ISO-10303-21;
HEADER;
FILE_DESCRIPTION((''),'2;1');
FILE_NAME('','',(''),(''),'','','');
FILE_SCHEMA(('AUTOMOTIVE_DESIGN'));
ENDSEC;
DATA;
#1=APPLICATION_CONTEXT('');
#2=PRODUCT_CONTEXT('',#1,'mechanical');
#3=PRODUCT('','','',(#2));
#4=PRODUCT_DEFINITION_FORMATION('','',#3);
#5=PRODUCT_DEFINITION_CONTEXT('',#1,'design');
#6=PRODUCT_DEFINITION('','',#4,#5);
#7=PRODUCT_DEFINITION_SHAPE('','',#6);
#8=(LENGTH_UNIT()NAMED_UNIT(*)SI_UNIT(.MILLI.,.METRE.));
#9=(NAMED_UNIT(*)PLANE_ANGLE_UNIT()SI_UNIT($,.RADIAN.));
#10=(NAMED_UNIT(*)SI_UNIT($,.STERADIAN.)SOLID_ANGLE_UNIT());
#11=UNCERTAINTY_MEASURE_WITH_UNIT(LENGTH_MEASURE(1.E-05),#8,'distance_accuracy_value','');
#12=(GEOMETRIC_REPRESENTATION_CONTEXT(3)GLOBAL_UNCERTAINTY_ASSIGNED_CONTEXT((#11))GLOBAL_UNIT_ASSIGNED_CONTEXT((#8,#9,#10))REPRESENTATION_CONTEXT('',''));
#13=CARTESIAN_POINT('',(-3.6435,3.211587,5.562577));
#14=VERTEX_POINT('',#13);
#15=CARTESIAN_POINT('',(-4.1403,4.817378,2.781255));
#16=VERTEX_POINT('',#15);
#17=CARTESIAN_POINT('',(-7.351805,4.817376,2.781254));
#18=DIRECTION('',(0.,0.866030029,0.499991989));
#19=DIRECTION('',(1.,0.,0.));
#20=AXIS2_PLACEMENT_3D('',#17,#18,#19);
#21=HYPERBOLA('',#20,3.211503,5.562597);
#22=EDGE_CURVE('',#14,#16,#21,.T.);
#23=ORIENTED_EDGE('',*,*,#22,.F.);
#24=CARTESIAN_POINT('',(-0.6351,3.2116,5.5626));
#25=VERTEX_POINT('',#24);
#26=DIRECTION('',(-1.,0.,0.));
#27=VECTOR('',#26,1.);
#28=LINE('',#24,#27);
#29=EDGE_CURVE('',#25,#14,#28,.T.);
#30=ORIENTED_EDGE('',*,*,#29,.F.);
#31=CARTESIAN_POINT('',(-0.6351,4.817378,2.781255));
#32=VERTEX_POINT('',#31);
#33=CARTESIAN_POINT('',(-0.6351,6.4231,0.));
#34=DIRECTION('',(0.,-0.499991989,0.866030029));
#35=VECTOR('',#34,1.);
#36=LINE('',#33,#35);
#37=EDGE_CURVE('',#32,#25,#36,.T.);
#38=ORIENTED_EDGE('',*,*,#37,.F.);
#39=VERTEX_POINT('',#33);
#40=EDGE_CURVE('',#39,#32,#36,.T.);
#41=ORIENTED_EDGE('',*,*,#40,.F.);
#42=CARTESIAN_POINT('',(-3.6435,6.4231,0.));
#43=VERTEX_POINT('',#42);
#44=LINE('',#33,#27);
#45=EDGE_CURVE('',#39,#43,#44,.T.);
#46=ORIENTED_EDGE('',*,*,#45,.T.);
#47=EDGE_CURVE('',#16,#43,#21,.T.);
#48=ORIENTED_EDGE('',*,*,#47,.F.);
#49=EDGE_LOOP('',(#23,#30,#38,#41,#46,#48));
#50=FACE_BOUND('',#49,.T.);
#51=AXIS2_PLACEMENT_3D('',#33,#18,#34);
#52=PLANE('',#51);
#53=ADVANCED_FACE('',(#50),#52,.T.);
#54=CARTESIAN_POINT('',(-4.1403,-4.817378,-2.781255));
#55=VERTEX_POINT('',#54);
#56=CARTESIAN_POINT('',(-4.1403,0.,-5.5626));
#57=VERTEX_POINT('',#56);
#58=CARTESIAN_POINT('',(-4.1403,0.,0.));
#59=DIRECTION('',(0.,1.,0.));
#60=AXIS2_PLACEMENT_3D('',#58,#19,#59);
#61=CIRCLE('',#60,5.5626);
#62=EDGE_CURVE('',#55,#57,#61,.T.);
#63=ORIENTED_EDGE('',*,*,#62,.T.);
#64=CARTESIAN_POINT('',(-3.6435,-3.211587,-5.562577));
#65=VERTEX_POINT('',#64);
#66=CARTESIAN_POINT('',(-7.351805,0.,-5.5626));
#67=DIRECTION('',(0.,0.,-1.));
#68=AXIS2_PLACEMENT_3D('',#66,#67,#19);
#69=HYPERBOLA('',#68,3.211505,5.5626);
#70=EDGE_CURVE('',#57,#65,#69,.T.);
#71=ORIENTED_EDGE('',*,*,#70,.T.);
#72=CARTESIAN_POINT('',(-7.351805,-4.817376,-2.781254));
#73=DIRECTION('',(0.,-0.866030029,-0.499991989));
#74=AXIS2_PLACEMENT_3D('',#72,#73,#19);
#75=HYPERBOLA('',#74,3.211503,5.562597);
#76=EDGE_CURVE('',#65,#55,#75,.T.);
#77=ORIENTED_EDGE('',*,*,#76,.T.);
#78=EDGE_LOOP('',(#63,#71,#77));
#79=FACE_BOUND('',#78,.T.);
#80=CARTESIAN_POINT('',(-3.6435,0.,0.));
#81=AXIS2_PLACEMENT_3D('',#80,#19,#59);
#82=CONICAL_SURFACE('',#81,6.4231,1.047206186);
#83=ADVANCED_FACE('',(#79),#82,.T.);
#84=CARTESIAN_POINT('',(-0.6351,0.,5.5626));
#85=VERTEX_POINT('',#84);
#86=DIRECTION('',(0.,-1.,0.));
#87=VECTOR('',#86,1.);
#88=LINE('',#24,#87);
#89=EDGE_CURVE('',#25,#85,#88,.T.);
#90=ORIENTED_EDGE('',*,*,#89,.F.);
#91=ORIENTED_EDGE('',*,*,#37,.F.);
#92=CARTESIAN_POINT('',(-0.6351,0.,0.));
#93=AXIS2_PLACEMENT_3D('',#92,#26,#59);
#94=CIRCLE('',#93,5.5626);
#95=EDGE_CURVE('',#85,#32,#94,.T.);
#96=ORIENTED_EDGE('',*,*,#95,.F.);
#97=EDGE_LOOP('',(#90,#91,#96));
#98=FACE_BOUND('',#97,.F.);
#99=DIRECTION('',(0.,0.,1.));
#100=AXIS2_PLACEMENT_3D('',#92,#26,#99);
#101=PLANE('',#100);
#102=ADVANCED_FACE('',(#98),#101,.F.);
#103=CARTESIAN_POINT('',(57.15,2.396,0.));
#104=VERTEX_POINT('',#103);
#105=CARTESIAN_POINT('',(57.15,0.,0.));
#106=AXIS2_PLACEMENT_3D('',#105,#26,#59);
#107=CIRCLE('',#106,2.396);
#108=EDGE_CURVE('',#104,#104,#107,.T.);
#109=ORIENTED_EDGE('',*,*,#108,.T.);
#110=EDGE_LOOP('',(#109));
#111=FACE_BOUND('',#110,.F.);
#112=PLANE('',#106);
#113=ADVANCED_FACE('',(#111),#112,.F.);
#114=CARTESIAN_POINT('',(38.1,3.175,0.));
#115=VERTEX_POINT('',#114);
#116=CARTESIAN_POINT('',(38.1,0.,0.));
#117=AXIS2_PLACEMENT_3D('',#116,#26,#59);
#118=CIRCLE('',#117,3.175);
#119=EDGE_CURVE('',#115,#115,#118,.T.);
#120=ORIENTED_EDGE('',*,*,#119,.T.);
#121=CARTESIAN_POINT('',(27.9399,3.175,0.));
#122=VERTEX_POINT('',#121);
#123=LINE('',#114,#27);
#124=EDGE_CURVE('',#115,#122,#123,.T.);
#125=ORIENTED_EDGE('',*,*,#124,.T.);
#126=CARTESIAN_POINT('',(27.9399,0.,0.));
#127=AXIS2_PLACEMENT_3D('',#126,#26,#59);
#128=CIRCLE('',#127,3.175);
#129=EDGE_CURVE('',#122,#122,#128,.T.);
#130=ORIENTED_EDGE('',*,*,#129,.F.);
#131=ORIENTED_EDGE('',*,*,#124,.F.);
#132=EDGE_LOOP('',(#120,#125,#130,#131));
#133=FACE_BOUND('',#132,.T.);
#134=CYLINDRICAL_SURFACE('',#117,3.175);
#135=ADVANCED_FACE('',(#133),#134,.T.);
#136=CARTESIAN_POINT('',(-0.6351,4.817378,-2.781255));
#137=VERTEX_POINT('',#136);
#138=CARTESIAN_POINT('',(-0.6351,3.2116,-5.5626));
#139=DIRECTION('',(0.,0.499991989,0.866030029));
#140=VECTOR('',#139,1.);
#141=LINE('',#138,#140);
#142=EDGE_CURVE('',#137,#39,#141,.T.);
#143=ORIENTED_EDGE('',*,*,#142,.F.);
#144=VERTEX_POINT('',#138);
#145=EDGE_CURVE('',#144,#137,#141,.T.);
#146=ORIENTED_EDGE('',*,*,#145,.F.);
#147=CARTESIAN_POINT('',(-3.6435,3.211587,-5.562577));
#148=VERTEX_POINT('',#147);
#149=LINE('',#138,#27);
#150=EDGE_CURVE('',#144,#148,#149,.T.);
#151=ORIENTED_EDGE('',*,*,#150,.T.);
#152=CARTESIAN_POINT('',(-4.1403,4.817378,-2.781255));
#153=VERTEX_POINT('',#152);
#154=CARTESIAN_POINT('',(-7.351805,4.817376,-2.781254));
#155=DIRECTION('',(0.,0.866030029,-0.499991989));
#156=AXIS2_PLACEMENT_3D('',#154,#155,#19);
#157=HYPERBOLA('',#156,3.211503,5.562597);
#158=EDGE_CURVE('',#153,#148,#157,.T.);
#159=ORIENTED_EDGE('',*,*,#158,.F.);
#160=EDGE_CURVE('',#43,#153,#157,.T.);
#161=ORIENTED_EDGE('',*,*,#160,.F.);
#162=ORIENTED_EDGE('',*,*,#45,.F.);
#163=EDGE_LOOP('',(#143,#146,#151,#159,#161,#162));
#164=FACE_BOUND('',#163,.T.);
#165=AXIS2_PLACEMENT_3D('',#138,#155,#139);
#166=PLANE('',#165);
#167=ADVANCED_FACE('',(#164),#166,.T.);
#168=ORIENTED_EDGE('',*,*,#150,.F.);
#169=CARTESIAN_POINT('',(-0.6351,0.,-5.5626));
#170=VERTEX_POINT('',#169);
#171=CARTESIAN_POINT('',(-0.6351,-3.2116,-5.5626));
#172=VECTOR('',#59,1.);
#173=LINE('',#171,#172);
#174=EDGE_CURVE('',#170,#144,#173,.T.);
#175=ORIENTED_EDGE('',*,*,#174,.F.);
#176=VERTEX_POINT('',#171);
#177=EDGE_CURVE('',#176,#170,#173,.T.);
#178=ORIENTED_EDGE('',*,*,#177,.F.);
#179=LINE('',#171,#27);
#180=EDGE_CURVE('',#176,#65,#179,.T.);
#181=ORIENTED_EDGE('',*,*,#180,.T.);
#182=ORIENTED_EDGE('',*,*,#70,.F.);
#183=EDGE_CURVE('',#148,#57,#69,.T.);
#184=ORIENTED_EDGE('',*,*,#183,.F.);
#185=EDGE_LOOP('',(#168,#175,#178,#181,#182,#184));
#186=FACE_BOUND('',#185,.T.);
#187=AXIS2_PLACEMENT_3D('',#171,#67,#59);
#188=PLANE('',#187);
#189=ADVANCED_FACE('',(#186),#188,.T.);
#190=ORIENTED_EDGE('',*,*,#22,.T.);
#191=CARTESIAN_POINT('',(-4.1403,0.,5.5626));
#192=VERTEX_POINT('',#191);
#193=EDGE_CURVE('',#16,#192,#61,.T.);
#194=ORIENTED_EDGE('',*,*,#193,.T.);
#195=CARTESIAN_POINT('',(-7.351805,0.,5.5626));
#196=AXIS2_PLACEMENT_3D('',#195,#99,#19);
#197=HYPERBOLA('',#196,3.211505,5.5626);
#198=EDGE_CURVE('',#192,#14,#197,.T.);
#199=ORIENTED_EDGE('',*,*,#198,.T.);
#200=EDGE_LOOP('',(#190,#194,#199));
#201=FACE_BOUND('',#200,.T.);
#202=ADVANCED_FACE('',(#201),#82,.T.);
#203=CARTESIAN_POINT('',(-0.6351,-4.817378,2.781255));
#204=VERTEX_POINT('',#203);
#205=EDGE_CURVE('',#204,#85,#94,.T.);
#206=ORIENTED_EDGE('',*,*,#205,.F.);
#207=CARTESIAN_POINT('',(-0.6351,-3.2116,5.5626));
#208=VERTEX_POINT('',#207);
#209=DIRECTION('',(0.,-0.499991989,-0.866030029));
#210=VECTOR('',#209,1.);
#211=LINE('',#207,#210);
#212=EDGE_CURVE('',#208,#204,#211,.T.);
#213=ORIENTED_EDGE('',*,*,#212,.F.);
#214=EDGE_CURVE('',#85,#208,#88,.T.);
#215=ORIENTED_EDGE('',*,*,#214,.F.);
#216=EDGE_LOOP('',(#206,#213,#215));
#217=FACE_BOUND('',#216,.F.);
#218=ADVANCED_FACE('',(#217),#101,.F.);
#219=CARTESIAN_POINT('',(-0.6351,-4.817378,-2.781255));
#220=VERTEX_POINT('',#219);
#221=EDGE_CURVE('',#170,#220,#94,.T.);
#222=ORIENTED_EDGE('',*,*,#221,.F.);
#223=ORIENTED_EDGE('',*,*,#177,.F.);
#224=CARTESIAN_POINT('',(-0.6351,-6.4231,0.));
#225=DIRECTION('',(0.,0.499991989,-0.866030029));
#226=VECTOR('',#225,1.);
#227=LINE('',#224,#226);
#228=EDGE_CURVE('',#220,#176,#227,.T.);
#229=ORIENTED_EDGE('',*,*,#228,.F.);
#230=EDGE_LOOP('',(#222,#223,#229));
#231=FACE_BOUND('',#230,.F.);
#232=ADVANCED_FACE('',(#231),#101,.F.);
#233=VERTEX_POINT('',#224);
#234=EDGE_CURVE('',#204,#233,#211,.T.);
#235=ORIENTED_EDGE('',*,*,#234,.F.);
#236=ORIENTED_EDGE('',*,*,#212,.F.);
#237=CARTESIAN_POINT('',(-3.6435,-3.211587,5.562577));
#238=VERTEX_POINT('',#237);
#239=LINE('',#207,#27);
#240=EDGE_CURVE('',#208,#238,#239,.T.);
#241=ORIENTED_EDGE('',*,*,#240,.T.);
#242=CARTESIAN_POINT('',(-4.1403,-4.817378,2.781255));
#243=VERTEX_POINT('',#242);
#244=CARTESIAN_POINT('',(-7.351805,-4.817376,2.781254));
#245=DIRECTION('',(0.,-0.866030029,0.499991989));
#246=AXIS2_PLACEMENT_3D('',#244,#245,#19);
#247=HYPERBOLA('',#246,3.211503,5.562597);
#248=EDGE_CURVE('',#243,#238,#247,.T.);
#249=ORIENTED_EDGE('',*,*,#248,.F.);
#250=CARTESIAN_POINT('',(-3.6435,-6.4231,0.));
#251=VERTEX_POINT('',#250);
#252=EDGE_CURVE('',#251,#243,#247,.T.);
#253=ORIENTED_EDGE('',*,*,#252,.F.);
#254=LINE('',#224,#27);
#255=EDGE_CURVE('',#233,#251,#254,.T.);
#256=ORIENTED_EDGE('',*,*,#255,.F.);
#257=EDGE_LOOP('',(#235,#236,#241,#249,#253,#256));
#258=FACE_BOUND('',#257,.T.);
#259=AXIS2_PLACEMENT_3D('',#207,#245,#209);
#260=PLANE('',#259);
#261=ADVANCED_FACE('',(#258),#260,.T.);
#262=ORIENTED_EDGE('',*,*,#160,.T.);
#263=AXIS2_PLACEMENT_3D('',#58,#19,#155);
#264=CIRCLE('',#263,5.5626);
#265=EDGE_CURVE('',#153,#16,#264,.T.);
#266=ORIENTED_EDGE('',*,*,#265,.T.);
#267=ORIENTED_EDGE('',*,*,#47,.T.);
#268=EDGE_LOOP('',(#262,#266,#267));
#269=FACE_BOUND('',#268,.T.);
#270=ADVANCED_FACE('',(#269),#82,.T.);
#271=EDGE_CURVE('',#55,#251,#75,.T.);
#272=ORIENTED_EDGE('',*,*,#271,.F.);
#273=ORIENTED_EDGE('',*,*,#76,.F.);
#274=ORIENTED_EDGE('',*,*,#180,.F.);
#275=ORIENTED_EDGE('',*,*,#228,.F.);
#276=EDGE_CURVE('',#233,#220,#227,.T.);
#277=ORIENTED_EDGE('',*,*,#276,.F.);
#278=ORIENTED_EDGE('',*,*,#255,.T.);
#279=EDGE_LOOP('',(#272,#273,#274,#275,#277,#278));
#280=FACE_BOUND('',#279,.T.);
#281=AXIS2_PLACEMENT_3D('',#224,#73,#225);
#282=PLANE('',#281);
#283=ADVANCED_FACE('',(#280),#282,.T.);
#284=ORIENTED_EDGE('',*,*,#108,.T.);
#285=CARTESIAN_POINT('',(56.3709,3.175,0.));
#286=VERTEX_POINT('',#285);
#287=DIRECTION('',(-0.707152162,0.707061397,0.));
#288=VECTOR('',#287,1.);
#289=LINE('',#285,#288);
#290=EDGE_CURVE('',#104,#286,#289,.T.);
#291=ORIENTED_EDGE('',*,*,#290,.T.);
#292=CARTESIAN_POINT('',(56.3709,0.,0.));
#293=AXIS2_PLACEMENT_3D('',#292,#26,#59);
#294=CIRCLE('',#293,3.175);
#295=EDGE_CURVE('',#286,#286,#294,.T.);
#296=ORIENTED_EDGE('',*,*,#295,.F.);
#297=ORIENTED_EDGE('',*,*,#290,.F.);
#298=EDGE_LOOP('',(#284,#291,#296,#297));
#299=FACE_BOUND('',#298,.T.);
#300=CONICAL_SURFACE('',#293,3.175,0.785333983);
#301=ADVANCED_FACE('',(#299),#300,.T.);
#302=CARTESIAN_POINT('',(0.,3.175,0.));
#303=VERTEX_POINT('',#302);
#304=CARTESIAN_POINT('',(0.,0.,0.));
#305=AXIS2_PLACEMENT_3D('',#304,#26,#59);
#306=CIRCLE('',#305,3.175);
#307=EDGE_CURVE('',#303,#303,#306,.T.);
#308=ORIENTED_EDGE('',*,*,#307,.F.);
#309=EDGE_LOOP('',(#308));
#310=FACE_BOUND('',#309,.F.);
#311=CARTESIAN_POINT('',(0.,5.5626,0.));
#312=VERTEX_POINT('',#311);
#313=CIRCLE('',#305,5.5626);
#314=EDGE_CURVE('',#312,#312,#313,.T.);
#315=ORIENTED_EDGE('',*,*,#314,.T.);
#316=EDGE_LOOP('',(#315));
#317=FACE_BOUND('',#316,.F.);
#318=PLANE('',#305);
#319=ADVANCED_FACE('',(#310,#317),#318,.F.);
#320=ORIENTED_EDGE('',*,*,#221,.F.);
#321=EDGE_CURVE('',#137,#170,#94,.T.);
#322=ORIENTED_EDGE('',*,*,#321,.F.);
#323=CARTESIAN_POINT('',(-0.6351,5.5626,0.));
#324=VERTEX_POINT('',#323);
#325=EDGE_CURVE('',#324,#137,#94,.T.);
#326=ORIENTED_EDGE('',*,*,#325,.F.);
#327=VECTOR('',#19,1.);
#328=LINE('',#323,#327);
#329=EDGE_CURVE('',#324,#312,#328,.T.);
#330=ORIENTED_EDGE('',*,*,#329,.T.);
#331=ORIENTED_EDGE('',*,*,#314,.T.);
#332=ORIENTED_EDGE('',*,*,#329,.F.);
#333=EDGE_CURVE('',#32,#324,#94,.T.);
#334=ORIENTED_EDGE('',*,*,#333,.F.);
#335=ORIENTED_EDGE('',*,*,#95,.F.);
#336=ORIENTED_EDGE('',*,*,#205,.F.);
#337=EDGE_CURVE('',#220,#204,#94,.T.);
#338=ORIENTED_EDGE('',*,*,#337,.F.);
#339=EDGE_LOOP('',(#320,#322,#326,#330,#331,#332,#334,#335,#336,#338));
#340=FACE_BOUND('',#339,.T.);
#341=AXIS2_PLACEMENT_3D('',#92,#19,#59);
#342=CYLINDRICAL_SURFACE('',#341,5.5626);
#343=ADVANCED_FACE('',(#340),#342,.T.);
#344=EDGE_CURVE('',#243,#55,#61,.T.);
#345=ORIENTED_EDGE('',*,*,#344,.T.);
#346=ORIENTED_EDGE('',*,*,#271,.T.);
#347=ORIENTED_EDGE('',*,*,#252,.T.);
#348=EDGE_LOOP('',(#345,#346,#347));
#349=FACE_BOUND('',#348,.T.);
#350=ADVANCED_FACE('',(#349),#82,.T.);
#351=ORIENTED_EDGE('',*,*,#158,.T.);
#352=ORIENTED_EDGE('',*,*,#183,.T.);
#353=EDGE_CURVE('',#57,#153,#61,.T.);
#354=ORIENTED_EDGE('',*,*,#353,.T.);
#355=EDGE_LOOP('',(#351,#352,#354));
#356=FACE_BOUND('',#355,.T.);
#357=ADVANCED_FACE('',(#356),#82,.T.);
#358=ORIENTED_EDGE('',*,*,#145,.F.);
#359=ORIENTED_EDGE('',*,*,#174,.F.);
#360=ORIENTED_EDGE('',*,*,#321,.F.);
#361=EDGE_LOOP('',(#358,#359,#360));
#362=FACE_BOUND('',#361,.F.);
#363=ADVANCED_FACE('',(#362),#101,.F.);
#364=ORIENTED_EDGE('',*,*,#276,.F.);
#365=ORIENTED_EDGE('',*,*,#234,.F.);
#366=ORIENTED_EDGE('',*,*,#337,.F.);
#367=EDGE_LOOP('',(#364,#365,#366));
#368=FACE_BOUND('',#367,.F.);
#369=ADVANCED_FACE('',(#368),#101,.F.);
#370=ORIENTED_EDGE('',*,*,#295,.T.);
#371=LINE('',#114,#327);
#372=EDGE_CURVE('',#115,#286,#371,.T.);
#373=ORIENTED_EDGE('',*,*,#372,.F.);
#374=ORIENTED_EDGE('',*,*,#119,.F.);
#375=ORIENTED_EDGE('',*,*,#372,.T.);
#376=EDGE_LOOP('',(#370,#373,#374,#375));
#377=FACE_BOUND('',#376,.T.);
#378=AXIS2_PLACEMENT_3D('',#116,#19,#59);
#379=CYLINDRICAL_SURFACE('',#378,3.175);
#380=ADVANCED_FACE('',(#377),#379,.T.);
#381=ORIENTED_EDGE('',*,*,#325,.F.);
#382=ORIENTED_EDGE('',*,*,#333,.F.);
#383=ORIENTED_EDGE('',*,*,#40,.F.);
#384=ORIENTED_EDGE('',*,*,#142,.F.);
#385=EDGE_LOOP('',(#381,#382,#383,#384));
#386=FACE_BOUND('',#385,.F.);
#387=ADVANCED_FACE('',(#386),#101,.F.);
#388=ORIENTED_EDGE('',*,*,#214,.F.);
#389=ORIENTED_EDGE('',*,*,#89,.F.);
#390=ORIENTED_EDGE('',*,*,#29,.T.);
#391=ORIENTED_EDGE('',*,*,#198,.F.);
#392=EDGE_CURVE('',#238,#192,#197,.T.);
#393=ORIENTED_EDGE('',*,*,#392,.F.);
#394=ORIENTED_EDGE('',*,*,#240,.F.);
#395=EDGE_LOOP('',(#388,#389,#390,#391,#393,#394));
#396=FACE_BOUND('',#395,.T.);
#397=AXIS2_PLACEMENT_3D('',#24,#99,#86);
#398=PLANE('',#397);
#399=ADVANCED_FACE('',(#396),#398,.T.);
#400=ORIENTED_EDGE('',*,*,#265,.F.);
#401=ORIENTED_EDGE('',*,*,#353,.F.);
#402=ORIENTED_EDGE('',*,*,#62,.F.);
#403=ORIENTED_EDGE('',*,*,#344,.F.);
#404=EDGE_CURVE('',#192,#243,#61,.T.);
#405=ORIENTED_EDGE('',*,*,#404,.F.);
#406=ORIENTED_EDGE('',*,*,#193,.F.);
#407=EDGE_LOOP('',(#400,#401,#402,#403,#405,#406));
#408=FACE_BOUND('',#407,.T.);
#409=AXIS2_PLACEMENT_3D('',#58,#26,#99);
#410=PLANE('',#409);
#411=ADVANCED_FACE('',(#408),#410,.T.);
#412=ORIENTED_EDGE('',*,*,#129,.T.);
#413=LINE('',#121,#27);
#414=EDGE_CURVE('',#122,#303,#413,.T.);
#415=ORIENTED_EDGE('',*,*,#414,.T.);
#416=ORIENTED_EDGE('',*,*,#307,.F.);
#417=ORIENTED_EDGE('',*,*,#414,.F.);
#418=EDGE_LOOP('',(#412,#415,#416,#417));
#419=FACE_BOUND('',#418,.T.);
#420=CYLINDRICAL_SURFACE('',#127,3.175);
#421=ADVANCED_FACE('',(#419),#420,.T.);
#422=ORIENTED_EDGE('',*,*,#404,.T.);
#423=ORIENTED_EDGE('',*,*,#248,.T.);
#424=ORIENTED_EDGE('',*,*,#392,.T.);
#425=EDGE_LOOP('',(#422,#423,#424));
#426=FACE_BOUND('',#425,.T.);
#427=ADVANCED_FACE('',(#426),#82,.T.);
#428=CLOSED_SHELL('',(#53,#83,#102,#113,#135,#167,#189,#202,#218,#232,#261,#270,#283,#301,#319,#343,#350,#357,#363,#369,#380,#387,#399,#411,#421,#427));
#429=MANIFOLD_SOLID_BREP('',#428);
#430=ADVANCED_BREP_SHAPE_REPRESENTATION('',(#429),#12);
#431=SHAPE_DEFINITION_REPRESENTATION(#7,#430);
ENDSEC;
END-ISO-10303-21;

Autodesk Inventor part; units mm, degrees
ref_plane "YZ Plane" through (0, 0, 0) normal (1, 0, 0) x (0, 1, 0)
ref_plane "XZ Plane" through (0, 0, 0) normal (0, 1, 0) x (-1, 0, 0)
sketch "Sketch1" plane through (0, 0, 0) normal (0, 0, 1) x (1, 0, 0)
  line L0 (0, 5.5626) -> (0, 3.175)
  line L1 (38.1, 3.175) -> (57.15, 3.175)
  line L2 (57.15, 3.175) -> (57.15, 0)
  line L3 (57.15, 0) -> (-0.6351, 0)
  line L4 (-12.1921, 0) -> (68.707, 0) projected
  line L5 (-0.6351, 0) -> (-0.6351, 5.5626)
  line L6 (-0.6351, 5.5626) -> (0, 5.5626)
  line L7 (38.1, 3.175) -> (27.9399, 3.175)
  line L8 (27.9399, 3.175) -> (0, 3.175)
  line L9 (0, -1.1125) -> (0, 6.6751) projected
  dimension "d0" = 57.15
  dimension "d1" = 19.05
  dimension "d2" = 6.35
  dimension "d9" = 0.6351
  dimension "d10" = 11.1252
  dimension "d13" = 10.1601
  dimension "d14" = 6.35
revolve "Body" add sketch "Sketch1" angle 360 about axis through (57.15, 0, 0) along (-1, 0, 0)
sketch "Sketch2" plane through (-0.6351, 0, 0) normal (-1, 0, 0) x (0, 0, 1)
  line L0 (0, 6.4231) -> (5.5626, 3.2116)
  line L1 (5.5626, 3.2116) -> (5.5626, -3.2116)
  line L2 (5.5626, -3.2116) -> (0, -6.4231)
  line L3 (0, -6.4231) -> (-5.5626, -3.2116)
  line L4 (-5.5626, -3.2116) -> (-5.5626, 3.2116)
  line L5 (-5.5626, 3.2116) -> (0, 6.4231)
  point P0 (0, 0)
  point P1 (0, 0)
  dimension "d11" = 11.1252
extrude "Head" add sketch "Sketch2" along normal blind 3.5052
sketch "Sketch4" plane through (0, 0, 0) normal (0, 0, 1) x (1, 0, 0)
  line L0 (-4.1403, 5.5626) -> (-4.1403, 6.4231)
  line L1 (-4.1403, 6.4231) -> (-3.6435, 6.4231)
  line L2 (-3.6435, 6.4231) -> (-4.1403, 5.5626)
  line L3 (-4.8413, 0) -> (0.0659, 0) projected
  line L4 (-0.6351, 6.4231) -> (-4.1403, 6.4231) projected
  line L5 (-4.1403, 3.2116) -> (-4.1403, 6.4231) projected
  dimension "d5" = 30
  dimension "d19" = 11.1252
revolve "Chamfer1" cut sketch "Sketch4" angle 360 about axis through (-10, 0, 0) along (1, 0, 0)
thread "Thread" size "1/4-20 UNC" class "2A" standard "ANSI Unified Screw Threads" length 19.05
chamfer "Chamfer2" distance 0.779 distance2 0.7791 1 edges at (57.15, -3.175, 0) measured on face at (57.15, -0.5663, 1.1587)
ref_plane "Work Plane1" through (1.525, 0, 0) normal (0, 0, 1) x (1, 0, 0)
equation "\"d0\" = NLG"
equation "\"d1\" = GEL"
equation "\"d2\" = GD"
equation "\"d10\" = SD2"
equation "\"d14\" = BDM"
equation "\"d11\" = SW"
equation "\"d3\" = KOH - SD"
equation "\"d5\" = ANG1"
equation "\"d19\" = SW0"
equation "\"d15\" = GEL"
equation "\"d6\" = -0.5 * SPD + 0.5 * GD"
equation "\"NLG\" = 57.15"
equation "\"GD\" = 6.35"
equation "\"BDM\" = 6.35"
equation "\"KOH\" = 4.1402"
equation "\"GEL\" = 19.05"
equation "\"SW\" = 11.1252"
equation "\"SW0\" = SW"
equation "\"SPD\" = GD1"
equation "\"SD2\" = SW"
equation "\"SD\" = 0.635"
equation "\"ANG1\" = 30deg"
equation "\"GAL\" = 10.16"
equation "\"GUL\" = 0.77902"
equation "\"RR\" = 0.381"
equation "\"WFT\" = SD"
equation "\"GD1\" = 4.79196"
equation "\"THREADDIA\" = 6.35"
equation "\"SDH\" = SW"
equation "\"SDHG\" = 27.94"
equation "\"TOA\" = 30deg"
equation "\"FAWI\" = 45deg"
equation "\"NND\" = 6.35"
equation "\"E0\" = 12.84961"
properties part number "AS 2465 - 1/4 x 2 1/4  UNC" material "Steel, Mild"
